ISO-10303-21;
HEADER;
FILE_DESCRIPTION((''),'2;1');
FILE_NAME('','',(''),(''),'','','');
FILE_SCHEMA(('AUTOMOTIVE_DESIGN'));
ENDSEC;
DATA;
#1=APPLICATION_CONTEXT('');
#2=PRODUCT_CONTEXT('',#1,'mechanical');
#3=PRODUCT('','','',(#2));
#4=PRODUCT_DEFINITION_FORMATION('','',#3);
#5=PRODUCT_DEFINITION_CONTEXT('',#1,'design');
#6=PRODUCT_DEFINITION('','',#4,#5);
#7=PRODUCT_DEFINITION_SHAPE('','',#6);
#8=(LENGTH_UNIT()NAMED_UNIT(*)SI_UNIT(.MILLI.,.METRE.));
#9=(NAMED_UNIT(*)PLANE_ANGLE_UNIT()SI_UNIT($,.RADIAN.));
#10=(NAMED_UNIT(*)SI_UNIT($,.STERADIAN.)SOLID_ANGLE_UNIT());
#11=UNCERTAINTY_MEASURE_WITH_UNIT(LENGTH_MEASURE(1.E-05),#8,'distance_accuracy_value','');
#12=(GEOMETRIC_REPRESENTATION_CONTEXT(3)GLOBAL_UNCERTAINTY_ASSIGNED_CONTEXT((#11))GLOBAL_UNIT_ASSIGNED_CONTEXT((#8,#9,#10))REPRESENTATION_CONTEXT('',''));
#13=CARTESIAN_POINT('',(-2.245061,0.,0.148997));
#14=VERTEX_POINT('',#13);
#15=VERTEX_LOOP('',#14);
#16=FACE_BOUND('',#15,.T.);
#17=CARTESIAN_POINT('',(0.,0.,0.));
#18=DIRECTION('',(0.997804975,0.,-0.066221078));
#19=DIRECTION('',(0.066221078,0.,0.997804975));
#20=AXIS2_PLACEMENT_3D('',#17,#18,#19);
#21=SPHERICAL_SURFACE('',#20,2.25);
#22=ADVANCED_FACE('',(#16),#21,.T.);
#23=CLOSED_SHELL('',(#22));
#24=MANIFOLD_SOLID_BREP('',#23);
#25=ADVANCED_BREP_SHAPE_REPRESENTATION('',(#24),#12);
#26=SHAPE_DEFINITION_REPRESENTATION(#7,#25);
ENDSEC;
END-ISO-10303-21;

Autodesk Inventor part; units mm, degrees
ref_plane "YZ Plane" through (0, 0, 0) normal (1, 0, 0) x (0, 1, 0)
ref_plane "XZ Plane" through (0, 0, 0) normal (0, 1, 0) x (-1, 0, 0)
ref_plane "XY Plane" through (0, 0, 0) normal (0, 0, 1) x (1, 0, 0)
sketch "Sketch1" plane through (0, 0, 0) normal (0, 1, 0) x (-1, 0, 0)
  circle A0 centre (0, 0) radius 2.25
  line L0 (2.2451, 0.149) -> (-2.2451, -0.149)
  dimension "d0" = 4.5
revolve "Revolution1" add sketch "Sketch1" angle 360 about axis through (-2.2451, 0, 0.149) along (0.9978047, 0, -0.066226) picked at (-0.8044, 1.1234) contours L0 A0
properties part number "4.5mm Ball Bearings"
